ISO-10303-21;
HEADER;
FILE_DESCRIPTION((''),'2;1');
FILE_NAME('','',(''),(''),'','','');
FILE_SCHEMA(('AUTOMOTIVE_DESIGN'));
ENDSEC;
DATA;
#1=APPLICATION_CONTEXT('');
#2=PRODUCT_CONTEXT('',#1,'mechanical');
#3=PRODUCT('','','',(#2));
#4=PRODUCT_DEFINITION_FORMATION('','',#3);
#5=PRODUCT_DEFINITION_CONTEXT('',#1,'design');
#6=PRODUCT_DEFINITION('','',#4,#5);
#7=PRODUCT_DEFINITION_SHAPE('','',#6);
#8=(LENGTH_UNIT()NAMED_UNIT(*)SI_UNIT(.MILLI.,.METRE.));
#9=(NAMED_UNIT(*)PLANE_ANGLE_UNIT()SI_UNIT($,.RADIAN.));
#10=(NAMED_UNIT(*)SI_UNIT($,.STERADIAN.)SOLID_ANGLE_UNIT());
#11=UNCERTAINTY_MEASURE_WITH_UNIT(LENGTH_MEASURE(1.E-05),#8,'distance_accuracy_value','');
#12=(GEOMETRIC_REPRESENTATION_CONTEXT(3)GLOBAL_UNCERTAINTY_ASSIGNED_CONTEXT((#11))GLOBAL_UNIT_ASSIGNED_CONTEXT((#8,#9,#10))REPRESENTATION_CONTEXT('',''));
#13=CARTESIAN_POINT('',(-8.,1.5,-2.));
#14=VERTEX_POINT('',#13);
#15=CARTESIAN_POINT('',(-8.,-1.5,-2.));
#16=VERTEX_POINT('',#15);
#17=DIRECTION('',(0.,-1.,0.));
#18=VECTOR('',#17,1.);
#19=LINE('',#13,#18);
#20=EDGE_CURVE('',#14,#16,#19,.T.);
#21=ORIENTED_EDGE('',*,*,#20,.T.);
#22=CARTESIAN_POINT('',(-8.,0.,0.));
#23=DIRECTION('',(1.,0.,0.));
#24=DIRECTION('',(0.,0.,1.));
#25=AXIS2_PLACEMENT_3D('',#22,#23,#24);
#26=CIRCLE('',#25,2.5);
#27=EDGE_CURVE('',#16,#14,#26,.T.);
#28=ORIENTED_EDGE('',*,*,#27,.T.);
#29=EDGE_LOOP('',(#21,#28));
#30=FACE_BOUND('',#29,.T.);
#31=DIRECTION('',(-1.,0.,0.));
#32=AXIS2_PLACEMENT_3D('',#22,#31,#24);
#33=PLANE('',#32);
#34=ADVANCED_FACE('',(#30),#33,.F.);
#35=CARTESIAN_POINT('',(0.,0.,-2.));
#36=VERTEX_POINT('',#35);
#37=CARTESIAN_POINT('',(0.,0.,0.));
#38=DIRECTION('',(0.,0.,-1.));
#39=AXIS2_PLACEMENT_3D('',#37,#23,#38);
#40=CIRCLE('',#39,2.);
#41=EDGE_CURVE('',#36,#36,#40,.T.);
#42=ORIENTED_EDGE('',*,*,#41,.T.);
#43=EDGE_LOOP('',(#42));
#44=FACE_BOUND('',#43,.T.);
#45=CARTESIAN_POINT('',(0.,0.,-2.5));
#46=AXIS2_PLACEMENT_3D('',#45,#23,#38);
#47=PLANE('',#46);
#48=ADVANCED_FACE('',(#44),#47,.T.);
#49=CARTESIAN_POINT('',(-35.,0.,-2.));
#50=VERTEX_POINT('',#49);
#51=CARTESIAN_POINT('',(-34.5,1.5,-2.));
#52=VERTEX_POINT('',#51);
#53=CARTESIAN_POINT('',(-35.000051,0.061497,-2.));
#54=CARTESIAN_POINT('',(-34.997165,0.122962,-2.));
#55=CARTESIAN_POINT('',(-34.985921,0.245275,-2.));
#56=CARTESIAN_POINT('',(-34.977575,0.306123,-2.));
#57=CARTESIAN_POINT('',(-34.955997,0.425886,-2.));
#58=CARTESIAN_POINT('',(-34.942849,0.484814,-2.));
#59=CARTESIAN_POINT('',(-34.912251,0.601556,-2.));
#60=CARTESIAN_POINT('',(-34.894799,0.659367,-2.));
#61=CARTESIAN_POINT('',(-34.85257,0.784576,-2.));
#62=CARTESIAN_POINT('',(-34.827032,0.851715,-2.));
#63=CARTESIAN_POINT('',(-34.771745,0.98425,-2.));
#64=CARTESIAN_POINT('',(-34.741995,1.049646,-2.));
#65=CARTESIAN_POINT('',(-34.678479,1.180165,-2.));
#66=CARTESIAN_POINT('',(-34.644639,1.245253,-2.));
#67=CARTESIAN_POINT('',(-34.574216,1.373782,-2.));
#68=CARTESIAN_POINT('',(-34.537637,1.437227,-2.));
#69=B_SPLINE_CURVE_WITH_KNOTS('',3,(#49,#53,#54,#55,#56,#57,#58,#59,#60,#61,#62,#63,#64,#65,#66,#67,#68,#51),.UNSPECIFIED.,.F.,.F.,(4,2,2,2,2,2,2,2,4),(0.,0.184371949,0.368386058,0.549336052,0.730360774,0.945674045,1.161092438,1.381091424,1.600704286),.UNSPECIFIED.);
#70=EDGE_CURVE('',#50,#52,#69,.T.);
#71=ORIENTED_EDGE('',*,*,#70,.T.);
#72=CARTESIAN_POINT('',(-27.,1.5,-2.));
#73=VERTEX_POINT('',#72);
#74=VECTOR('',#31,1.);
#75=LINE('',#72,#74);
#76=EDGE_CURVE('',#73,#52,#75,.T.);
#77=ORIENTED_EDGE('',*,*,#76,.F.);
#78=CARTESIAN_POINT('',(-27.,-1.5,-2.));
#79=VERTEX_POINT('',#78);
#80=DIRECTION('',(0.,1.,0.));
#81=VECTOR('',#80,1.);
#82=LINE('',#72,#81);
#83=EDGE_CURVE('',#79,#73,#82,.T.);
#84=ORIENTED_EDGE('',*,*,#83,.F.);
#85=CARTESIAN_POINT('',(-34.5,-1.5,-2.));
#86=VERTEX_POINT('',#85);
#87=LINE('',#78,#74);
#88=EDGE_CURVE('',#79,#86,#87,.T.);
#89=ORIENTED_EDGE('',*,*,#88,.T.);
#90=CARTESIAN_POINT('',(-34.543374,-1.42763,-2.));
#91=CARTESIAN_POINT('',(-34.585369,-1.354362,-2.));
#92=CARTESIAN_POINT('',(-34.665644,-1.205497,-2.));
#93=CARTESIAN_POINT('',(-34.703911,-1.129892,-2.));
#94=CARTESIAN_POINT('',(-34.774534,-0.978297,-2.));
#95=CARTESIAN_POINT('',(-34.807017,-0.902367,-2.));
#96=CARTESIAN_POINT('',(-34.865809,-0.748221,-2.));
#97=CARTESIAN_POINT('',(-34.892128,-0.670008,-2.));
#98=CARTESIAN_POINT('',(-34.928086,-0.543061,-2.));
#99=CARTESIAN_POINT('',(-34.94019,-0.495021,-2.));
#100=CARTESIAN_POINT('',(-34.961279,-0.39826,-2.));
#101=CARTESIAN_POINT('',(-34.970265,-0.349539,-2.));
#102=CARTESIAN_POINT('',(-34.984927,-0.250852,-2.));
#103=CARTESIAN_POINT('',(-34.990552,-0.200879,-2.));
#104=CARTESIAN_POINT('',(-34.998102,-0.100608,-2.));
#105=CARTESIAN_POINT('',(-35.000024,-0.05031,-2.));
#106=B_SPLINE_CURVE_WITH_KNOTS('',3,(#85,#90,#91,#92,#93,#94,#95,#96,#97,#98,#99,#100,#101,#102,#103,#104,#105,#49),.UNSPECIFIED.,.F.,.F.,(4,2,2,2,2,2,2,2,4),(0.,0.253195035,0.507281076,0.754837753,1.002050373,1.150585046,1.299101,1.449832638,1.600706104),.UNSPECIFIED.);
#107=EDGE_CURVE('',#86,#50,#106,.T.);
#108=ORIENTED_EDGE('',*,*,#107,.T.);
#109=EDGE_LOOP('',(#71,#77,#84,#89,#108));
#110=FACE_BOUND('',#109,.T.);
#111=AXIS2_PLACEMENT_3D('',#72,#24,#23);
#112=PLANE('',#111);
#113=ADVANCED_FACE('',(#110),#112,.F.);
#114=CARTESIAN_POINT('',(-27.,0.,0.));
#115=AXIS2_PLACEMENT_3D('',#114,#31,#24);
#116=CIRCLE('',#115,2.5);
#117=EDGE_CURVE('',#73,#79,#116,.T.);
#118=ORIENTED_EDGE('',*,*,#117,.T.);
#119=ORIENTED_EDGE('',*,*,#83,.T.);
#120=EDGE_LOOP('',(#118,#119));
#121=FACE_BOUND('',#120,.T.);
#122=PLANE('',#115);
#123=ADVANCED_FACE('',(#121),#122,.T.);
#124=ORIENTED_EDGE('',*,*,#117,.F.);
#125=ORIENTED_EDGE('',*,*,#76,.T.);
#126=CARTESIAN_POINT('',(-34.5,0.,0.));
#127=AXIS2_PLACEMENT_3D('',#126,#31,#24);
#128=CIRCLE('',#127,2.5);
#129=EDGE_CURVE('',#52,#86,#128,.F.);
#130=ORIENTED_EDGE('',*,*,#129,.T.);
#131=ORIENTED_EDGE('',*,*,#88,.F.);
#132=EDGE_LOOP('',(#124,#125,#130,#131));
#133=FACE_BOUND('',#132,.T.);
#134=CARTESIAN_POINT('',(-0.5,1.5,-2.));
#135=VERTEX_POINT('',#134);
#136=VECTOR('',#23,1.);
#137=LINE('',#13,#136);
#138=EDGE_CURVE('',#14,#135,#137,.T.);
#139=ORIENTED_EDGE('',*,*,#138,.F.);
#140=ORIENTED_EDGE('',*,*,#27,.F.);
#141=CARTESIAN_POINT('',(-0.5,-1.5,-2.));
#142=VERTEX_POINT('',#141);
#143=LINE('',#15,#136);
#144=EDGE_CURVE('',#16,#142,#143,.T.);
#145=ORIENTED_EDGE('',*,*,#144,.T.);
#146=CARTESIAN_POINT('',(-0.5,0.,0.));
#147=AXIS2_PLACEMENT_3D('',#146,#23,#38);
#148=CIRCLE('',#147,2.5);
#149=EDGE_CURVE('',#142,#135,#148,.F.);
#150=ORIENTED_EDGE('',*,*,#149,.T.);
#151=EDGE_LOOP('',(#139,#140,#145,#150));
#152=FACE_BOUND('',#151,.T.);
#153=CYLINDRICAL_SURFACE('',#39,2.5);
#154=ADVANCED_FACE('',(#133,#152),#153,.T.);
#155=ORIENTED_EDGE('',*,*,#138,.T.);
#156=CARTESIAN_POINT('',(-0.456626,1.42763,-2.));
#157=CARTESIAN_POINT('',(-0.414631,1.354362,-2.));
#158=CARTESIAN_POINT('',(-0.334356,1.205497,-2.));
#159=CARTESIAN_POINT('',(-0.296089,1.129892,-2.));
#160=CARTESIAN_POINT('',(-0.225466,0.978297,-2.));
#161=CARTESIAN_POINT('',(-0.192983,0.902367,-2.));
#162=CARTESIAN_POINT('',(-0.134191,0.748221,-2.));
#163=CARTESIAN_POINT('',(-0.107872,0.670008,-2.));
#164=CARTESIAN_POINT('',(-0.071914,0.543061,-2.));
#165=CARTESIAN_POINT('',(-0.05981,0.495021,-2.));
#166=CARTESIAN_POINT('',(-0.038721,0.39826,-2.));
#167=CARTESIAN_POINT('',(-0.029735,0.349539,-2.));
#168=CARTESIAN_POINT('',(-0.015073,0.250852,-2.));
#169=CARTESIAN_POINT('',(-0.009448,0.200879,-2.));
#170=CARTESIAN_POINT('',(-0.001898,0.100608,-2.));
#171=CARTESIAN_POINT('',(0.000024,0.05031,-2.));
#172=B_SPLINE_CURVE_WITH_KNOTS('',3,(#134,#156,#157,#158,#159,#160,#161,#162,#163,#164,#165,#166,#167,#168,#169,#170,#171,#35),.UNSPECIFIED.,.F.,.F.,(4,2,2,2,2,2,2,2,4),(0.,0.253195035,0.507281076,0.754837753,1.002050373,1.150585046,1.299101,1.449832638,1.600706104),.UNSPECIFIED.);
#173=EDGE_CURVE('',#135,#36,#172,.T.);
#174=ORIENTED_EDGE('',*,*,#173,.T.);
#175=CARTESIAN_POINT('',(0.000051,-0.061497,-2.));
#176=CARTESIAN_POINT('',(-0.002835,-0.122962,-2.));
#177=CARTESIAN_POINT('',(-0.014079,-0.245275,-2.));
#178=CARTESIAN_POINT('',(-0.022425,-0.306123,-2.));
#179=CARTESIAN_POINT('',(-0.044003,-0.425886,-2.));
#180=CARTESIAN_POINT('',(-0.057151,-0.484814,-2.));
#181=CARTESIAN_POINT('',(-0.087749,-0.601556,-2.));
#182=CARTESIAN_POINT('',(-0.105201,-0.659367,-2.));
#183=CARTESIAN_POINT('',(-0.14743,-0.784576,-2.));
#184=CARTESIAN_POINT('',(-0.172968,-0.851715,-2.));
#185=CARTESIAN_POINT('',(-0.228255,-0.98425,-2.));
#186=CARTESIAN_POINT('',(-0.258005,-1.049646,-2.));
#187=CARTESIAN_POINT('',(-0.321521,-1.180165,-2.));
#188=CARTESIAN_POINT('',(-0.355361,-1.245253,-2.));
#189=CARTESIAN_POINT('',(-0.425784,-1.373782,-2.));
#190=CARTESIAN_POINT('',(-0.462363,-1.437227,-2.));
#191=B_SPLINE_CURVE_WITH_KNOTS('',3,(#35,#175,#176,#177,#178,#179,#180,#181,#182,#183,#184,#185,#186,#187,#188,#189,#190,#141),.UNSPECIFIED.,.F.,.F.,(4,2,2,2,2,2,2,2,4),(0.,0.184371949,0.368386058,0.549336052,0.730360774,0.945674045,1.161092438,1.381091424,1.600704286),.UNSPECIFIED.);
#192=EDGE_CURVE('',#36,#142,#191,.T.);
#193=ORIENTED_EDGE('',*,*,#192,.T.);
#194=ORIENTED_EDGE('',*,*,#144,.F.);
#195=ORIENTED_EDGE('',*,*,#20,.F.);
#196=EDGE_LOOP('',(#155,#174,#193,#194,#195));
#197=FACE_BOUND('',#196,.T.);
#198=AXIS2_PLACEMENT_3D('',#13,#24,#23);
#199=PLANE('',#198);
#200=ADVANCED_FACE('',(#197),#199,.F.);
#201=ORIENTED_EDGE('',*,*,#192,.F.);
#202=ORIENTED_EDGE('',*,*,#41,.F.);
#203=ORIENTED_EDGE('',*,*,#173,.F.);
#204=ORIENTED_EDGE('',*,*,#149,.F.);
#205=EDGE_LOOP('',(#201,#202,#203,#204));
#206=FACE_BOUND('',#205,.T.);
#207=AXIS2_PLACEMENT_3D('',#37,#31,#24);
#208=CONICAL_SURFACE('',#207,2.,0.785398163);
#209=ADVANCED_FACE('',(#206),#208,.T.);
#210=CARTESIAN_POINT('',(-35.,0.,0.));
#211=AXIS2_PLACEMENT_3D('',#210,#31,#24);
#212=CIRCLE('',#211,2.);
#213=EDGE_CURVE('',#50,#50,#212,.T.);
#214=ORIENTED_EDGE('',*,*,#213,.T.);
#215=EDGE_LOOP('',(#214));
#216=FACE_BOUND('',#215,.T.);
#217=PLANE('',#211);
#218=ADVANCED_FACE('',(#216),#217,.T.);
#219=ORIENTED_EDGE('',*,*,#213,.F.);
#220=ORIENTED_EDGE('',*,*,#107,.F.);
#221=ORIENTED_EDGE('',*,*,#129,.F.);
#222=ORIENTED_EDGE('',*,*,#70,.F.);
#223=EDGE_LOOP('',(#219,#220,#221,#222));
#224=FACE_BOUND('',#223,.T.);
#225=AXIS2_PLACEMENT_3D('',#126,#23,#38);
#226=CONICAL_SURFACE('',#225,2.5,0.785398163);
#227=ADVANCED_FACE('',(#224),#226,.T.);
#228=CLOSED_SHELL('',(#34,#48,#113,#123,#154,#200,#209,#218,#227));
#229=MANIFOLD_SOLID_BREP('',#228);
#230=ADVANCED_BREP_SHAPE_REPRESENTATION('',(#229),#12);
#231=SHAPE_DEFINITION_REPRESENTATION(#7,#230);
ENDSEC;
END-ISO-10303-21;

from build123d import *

# Parameters (mm, degrees)
SKETCH1_W          = 35
SKETCH1_H          = 2.5
CUT_EXTRUDE1_START = -8
CUT_EXTRUDE1_DEPTH = 8
CUT_EXTRUDE2_DEPTH = 8
CHAMFER1_SIZE      = 0.5


with BuildPart() as part:
    # Sketch1 → Revolve1 (revolve)
    with BuildSketch(Plane(origin=(0, 0, 0), x_dir=(1, 0, 0), z_dir=(0, 1, 0))):
        with Locations((-17.5, 1.25)):
            Rectangle(SKETCH1_W, SKETCH1_H)
    revolve(axis=Axis((0, 0, 0), (-1, 0, 0)))

    # Sketch2 → Cut-Extrude1 (cut)
    with BuildSketch(Plane.ZY.offset(35).offset(CUT_EXTRUDE1_START)):
        with BuildLine():
            Line((-2, 1.5), (-2, -1.5))
            ThreePointArc((-2, -1.5), (-2.5, 0), (-2, 1.5))
        make_face()
    extrude(amount=CUT_EXTRUDE1_DEPTH, mode=Mode.SUBTRACT)

    # Sketch3 → Cut-Extrude2 (cut)
    with BuildSketch(Plane(origin=(0, 0, 0), x_dir=(0, 0, -1), z_dir=(1, 0, 0))):
        with BuildLine():
            Line((2, 1.5), (2, -1.5))
            ThreePointArc((2, -1.5), (2.5, 0), (2, 1.5))
        make_face()
    extrude(amount=-CUT_EXTRUDE2_DEPTH, mode=Mode.SUBTRACT)

    # Chamfer1
    chamfer1_edges = [part.edges().sort_by_distance(p)[0] for p in [
        (0, 0, 2.5),
        (-35, 0, 2.5),
    ]]
    chamfer(chamfer1_edges, length=CHAMFER1_SIZE - 0.0001)  # a hair under: the kernel refuses the full size


solid = part.part
